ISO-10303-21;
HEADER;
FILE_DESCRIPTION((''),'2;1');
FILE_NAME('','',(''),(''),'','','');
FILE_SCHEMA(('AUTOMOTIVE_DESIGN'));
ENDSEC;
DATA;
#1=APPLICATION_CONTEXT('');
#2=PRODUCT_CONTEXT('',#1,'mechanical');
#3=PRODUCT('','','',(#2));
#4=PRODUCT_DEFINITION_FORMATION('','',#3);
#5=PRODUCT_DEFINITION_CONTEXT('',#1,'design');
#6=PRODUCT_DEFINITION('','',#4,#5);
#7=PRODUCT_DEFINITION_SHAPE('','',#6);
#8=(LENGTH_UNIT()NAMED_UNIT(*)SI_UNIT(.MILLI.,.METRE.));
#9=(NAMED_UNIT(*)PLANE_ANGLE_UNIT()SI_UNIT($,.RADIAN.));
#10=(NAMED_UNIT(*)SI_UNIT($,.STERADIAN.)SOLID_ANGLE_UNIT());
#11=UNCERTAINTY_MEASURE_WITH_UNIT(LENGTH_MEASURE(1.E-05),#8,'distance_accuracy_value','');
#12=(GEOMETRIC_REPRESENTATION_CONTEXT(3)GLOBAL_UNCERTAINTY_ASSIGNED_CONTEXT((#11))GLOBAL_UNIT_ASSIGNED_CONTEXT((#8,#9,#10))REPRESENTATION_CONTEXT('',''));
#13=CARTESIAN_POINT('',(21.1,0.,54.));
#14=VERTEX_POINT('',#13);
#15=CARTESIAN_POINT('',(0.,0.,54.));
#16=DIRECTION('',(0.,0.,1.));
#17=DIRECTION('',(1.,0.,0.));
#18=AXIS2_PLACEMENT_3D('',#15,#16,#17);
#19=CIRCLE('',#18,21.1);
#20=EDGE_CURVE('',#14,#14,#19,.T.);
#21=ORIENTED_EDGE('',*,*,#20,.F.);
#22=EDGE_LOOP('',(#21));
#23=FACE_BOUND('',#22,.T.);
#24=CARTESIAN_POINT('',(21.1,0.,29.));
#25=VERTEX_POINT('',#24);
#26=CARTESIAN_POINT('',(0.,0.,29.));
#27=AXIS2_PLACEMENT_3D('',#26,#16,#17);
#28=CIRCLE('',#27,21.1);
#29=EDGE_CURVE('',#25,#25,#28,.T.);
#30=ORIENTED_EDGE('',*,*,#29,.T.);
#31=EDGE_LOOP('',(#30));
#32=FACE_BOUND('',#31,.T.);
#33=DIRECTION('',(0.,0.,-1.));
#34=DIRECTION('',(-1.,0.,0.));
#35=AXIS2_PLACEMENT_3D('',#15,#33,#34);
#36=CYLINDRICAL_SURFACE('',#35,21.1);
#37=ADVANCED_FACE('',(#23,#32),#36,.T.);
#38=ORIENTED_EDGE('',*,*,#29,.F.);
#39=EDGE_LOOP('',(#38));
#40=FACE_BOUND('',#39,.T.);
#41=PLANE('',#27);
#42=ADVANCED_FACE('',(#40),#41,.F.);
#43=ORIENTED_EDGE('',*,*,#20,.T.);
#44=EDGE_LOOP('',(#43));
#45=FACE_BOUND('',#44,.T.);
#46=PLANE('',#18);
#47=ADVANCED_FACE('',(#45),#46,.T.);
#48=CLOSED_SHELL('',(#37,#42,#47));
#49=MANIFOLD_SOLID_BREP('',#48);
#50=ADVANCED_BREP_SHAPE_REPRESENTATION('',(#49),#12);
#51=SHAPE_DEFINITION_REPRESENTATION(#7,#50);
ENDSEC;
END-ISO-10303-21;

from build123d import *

# Parameters (mm, degrees)
BOSS_EXTRUDE1_OUTLINE_R = 21.1
BOSS_EXTRUDE1_DEPTH     = 25


# Read off the part's stored shape, not the designer's step: Boss-Extrude1
with BuildPart() as part:
    # Boss-Extrude1 outline → Boss-Extrude1 (new body)
    with BuildSketch(Plane.XY.offset(29)):
        Circle(BOSS_EXTRUDE1_OUTLINE_R)
    extrude(amount=BOSS_EXTRUDE1_DEPTH)


solid = part.part
